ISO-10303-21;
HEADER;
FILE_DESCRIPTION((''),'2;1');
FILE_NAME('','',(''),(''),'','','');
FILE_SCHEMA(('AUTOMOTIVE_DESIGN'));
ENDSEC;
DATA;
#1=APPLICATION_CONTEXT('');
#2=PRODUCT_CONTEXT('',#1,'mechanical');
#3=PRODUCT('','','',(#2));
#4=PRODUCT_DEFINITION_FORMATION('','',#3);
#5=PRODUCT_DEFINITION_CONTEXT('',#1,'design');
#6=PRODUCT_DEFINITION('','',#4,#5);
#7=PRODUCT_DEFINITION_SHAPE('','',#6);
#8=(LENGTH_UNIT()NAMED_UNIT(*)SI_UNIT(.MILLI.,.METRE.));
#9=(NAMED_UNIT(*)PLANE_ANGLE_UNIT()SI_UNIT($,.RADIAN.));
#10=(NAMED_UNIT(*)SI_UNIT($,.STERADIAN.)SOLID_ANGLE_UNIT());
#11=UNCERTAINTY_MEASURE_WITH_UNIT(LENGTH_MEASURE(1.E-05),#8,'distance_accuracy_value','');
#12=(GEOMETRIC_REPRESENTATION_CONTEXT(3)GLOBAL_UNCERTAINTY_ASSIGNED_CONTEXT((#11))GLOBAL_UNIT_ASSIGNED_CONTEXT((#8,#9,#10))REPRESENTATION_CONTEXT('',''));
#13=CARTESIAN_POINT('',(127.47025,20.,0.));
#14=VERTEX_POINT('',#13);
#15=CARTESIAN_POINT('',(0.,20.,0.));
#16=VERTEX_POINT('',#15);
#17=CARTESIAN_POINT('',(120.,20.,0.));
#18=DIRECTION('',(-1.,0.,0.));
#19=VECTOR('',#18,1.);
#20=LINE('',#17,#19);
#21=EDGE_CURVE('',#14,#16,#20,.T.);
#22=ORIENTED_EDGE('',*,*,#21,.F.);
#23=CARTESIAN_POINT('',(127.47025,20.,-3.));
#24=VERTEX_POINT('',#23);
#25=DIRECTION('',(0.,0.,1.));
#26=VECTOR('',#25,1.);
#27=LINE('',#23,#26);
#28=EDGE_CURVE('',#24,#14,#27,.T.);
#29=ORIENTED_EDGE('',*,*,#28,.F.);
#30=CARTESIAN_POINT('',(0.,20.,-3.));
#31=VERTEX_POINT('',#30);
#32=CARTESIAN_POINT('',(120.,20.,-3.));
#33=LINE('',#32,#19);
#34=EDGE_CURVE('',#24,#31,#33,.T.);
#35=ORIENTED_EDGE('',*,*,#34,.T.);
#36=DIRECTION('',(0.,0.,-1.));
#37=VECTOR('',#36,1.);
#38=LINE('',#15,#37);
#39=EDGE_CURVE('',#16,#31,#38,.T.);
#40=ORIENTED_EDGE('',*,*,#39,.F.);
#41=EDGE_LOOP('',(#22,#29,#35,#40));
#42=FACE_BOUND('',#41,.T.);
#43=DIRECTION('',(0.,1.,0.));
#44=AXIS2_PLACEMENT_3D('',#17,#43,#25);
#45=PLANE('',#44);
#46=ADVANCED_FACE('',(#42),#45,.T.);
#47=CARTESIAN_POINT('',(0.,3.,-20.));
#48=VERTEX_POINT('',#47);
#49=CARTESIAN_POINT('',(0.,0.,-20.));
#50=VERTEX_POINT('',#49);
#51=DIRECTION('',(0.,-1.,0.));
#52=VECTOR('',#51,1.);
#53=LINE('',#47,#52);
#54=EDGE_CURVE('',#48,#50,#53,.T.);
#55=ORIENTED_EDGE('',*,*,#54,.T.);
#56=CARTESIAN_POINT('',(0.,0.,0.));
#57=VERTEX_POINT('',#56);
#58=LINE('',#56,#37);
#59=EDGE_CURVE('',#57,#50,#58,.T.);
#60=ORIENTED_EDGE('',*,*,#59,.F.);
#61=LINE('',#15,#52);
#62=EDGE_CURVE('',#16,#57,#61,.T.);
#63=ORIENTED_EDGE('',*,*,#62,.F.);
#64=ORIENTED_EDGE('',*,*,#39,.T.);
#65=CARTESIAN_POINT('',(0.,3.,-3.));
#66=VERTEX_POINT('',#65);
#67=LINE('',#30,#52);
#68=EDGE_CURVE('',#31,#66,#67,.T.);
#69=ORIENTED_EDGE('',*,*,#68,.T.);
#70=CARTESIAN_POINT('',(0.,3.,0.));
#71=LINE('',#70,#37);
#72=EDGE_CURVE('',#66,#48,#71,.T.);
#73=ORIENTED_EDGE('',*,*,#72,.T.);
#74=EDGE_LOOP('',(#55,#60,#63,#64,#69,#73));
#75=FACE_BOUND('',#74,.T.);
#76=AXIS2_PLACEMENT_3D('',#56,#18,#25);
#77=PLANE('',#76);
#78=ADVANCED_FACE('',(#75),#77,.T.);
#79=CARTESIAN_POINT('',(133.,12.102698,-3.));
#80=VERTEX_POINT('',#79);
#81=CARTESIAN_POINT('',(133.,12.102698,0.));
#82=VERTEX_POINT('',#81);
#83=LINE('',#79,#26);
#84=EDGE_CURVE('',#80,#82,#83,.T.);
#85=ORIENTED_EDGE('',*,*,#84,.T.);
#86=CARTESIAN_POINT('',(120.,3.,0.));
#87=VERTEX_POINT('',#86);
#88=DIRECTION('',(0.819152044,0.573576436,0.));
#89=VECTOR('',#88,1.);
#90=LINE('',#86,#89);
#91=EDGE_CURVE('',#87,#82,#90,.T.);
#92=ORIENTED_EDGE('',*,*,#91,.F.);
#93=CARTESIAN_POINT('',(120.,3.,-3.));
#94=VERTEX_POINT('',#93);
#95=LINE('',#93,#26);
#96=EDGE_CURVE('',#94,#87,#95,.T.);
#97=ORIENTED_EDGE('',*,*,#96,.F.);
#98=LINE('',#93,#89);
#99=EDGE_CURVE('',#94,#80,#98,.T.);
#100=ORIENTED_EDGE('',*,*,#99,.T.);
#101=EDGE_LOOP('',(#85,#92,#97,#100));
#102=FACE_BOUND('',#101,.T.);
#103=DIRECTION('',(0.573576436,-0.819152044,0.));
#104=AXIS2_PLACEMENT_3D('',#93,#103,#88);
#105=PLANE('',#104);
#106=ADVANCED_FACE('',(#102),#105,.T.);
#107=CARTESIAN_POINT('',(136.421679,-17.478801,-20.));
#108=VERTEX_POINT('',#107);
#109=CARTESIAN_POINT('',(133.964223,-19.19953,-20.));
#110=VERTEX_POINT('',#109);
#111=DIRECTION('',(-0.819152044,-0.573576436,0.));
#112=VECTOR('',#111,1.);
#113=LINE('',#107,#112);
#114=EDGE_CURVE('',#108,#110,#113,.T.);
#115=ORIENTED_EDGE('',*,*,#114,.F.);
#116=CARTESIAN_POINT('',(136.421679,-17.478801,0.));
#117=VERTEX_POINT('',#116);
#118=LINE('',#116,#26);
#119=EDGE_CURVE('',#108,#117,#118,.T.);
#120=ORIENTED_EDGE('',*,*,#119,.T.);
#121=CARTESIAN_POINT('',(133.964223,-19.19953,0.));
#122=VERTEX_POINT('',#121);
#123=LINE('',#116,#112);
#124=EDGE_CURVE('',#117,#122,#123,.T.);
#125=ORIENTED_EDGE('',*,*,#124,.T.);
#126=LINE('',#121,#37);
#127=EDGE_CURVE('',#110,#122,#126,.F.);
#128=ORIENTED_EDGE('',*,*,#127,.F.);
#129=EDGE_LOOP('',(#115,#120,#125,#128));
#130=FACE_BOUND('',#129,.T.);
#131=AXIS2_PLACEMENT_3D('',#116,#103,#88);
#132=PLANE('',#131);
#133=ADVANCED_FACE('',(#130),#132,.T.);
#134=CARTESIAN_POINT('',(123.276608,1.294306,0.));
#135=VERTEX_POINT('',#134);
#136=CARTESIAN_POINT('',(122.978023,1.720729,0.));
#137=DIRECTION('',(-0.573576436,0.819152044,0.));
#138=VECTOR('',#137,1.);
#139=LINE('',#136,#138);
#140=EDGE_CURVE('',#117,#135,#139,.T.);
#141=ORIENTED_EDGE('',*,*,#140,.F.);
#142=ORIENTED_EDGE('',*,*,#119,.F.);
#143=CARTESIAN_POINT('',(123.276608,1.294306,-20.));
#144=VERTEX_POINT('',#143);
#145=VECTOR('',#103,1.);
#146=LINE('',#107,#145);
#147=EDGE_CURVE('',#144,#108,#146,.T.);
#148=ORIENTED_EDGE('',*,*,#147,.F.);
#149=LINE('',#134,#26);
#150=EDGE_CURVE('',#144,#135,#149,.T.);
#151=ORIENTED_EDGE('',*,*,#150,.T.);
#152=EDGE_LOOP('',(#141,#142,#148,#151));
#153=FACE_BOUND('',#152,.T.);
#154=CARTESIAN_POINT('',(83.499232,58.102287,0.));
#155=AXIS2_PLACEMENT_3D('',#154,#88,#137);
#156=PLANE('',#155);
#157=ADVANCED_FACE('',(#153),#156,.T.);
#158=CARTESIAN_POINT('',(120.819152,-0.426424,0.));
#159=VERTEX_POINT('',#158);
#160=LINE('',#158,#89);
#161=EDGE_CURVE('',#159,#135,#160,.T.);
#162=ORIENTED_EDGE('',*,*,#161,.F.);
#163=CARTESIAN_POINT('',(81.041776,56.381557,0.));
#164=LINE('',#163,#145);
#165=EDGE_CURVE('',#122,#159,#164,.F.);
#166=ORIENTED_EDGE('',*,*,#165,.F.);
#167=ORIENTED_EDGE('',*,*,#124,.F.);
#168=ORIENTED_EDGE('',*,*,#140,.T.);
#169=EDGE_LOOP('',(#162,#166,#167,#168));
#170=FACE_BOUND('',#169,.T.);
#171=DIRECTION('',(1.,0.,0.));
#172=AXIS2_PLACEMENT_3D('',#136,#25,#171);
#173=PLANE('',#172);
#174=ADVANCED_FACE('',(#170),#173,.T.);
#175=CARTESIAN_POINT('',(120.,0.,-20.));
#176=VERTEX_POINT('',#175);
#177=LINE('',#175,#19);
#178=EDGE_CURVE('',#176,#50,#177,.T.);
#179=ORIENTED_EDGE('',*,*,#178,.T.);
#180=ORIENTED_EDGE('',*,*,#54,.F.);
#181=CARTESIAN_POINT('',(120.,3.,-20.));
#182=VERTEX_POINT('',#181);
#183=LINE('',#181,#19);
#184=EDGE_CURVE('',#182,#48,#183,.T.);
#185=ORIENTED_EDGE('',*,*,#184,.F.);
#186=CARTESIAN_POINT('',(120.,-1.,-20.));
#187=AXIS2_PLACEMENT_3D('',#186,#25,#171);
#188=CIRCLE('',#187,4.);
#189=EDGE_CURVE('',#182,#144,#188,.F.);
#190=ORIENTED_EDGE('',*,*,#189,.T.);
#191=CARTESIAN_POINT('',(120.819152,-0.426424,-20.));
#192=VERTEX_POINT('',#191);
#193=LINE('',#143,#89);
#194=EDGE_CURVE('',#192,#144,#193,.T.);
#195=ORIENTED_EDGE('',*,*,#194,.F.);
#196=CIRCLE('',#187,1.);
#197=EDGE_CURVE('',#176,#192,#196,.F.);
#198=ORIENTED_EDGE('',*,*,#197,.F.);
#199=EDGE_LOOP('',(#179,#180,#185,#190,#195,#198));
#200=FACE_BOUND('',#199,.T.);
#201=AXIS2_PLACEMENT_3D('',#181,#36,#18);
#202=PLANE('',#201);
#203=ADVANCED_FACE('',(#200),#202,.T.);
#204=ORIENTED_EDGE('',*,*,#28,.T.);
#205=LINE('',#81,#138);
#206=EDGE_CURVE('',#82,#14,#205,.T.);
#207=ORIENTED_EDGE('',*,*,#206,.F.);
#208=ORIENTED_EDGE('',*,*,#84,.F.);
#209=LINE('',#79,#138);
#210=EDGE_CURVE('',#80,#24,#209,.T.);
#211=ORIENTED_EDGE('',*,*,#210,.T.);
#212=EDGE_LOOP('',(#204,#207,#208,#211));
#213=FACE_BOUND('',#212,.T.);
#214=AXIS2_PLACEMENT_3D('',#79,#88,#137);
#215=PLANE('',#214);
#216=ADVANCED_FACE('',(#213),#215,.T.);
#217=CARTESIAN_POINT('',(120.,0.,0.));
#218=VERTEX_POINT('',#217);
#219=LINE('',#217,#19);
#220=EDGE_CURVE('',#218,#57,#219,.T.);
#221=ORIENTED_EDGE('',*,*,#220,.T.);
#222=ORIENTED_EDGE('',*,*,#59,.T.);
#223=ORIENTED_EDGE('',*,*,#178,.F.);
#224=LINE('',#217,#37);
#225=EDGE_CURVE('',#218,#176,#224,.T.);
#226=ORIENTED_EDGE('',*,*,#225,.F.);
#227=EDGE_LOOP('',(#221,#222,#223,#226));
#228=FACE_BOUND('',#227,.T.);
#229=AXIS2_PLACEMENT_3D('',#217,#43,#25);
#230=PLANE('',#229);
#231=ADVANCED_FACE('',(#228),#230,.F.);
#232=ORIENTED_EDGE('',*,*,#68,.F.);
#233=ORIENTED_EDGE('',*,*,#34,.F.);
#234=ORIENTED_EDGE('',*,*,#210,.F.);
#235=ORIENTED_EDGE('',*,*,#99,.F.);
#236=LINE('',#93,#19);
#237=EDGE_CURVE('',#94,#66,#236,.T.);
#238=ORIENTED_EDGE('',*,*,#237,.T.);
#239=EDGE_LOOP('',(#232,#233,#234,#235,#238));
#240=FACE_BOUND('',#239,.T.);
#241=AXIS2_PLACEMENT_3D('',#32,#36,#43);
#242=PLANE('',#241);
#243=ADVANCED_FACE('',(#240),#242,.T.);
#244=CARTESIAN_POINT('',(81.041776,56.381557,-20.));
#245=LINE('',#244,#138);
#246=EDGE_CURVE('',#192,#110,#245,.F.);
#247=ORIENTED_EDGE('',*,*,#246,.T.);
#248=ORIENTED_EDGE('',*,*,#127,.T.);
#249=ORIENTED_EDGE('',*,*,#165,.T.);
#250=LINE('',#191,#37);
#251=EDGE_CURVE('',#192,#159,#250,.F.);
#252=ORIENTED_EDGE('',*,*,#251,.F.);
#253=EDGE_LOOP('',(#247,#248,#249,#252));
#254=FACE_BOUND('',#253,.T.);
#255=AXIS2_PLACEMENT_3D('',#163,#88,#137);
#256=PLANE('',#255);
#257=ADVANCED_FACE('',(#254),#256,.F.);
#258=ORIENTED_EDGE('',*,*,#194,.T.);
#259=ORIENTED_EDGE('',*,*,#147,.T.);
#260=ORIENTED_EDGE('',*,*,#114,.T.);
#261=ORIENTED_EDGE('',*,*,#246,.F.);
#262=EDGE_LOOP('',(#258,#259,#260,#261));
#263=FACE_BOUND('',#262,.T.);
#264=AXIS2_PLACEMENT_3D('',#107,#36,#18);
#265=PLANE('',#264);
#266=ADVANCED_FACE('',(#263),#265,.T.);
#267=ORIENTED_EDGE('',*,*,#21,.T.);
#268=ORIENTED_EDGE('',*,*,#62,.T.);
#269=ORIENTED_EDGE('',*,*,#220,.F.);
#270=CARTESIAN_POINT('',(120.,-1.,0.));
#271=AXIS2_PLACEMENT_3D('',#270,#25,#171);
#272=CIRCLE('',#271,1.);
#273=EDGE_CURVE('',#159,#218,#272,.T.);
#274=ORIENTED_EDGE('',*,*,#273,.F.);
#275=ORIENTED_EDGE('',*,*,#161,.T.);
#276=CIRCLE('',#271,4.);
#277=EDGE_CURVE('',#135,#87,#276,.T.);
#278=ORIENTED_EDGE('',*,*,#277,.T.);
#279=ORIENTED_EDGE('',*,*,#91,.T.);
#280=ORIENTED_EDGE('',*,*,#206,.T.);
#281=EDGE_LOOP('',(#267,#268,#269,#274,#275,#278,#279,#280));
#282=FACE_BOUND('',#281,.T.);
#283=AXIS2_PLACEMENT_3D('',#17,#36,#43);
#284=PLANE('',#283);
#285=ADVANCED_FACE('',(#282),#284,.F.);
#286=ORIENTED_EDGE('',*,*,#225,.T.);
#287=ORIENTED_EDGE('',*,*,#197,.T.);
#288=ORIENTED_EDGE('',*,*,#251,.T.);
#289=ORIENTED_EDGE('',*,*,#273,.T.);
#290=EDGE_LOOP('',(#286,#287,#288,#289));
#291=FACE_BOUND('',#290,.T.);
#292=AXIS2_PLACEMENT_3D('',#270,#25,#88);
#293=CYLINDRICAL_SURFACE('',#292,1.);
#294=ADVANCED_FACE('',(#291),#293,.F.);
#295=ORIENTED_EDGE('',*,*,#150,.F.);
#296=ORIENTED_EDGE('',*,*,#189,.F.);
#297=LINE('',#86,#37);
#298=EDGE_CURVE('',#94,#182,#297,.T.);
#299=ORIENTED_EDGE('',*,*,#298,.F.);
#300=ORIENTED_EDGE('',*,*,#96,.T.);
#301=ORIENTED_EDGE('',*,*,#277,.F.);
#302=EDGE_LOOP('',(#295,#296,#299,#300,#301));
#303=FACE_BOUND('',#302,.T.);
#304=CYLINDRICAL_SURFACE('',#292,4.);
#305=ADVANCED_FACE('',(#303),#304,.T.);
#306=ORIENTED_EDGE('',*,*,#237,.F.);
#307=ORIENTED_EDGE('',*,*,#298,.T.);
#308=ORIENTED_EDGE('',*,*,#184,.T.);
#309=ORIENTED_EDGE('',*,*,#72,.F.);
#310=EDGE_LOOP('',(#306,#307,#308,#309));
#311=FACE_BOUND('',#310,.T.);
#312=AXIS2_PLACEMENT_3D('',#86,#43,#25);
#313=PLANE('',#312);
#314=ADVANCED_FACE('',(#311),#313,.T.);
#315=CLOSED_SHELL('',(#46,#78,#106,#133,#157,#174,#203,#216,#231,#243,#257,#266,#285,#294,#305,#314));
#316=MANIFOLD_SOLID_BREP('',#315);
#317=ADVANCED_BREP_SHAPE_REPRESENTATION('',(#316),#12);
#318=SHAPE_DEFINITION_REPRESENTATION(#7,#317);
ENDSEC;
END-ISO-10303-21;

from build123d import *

# Parameters (mm, degrees)
EXTRUDE_1_DEPTH        = 120
SKETCH_3_W             = 120
SKETCH_3_H             = 20
SM_BASE_FLANGE_1_DEPTH = 3
SM_EDGE_FLANGE_2_DEPTH = 20
EXTRUDE_1_2_DEPTH      = 3


# Sheet-metal steps are written as plain solids
with BuildPart() as part:
    # Sketch 1 → Extrude 1 (new body)
    with BuildSketch(Plane(origin=(0, 0, 0), x_dir=(0, 0, -1), z_dir=(1, 0, 0))):
        Polygon((0, 20), (0, 0), (20, 0), (20, 3), (3, 3), (3, 20), align=None)
    extrude(amount=EXTRUDE_1_DEPTH)



with BuildPart() as body_2:
    # Эскиз3 → Базовая кромка1 (new body)
    with BuildSketch(Plane.XZ):
        with Locations((60, -10)):
            Rectangle(SKETCH_3_W, SKETCH_3_H)
    extrude(amount=-SM_BASE_FLANGE_1_DEPTH)

    # Ребро-кромка2 section (across the edge) → Ребро-кромка2 (add)
    with BuildSketch(Plane(origin=(120.520567051, 0, -20), x_dir=(-0.8191520442889889, -0.5735764363510502, 0), z_dir=(0, 0, 1))):
        with BuildLine():
            Line((-3, 0.520567051), (-3, 23.438298848))
            Line((-3, 23.438298848), (0, 23.438298848))
            Line((0, 23.438298848), (0, 0.520567051))
            ThreePointArc((0, 0.520567051), (0.112989167, 0.058818437), (0.426423564, -0.298584994))
            Line((0.426423564, -0.298584994), (-1.294305745, -2.756041127))
            ThreePointArc((-1.294305745, -2.756041127), (-2.548043333, -1.326427402), (-3, 0.520567051))
        make_face()
    extrude(amount=SM_EDGE_FLANGE_2_DEPTH)


with BuildPart() as part_1:
    add(part.part)

    add(body_2.part)  # Extrude 1 2 merges body 2
    # Эскиз10 → Extrude 1 2 (add)
    with BuildSketch(Plane.XY):
        Polygon((120, 20), (120, 3), (133, 12.102697997), (127.470249606, 20), align=None)
    extrude(amount=-EXTRUDE_1_2_DEPTH)


solid = part_1.part
